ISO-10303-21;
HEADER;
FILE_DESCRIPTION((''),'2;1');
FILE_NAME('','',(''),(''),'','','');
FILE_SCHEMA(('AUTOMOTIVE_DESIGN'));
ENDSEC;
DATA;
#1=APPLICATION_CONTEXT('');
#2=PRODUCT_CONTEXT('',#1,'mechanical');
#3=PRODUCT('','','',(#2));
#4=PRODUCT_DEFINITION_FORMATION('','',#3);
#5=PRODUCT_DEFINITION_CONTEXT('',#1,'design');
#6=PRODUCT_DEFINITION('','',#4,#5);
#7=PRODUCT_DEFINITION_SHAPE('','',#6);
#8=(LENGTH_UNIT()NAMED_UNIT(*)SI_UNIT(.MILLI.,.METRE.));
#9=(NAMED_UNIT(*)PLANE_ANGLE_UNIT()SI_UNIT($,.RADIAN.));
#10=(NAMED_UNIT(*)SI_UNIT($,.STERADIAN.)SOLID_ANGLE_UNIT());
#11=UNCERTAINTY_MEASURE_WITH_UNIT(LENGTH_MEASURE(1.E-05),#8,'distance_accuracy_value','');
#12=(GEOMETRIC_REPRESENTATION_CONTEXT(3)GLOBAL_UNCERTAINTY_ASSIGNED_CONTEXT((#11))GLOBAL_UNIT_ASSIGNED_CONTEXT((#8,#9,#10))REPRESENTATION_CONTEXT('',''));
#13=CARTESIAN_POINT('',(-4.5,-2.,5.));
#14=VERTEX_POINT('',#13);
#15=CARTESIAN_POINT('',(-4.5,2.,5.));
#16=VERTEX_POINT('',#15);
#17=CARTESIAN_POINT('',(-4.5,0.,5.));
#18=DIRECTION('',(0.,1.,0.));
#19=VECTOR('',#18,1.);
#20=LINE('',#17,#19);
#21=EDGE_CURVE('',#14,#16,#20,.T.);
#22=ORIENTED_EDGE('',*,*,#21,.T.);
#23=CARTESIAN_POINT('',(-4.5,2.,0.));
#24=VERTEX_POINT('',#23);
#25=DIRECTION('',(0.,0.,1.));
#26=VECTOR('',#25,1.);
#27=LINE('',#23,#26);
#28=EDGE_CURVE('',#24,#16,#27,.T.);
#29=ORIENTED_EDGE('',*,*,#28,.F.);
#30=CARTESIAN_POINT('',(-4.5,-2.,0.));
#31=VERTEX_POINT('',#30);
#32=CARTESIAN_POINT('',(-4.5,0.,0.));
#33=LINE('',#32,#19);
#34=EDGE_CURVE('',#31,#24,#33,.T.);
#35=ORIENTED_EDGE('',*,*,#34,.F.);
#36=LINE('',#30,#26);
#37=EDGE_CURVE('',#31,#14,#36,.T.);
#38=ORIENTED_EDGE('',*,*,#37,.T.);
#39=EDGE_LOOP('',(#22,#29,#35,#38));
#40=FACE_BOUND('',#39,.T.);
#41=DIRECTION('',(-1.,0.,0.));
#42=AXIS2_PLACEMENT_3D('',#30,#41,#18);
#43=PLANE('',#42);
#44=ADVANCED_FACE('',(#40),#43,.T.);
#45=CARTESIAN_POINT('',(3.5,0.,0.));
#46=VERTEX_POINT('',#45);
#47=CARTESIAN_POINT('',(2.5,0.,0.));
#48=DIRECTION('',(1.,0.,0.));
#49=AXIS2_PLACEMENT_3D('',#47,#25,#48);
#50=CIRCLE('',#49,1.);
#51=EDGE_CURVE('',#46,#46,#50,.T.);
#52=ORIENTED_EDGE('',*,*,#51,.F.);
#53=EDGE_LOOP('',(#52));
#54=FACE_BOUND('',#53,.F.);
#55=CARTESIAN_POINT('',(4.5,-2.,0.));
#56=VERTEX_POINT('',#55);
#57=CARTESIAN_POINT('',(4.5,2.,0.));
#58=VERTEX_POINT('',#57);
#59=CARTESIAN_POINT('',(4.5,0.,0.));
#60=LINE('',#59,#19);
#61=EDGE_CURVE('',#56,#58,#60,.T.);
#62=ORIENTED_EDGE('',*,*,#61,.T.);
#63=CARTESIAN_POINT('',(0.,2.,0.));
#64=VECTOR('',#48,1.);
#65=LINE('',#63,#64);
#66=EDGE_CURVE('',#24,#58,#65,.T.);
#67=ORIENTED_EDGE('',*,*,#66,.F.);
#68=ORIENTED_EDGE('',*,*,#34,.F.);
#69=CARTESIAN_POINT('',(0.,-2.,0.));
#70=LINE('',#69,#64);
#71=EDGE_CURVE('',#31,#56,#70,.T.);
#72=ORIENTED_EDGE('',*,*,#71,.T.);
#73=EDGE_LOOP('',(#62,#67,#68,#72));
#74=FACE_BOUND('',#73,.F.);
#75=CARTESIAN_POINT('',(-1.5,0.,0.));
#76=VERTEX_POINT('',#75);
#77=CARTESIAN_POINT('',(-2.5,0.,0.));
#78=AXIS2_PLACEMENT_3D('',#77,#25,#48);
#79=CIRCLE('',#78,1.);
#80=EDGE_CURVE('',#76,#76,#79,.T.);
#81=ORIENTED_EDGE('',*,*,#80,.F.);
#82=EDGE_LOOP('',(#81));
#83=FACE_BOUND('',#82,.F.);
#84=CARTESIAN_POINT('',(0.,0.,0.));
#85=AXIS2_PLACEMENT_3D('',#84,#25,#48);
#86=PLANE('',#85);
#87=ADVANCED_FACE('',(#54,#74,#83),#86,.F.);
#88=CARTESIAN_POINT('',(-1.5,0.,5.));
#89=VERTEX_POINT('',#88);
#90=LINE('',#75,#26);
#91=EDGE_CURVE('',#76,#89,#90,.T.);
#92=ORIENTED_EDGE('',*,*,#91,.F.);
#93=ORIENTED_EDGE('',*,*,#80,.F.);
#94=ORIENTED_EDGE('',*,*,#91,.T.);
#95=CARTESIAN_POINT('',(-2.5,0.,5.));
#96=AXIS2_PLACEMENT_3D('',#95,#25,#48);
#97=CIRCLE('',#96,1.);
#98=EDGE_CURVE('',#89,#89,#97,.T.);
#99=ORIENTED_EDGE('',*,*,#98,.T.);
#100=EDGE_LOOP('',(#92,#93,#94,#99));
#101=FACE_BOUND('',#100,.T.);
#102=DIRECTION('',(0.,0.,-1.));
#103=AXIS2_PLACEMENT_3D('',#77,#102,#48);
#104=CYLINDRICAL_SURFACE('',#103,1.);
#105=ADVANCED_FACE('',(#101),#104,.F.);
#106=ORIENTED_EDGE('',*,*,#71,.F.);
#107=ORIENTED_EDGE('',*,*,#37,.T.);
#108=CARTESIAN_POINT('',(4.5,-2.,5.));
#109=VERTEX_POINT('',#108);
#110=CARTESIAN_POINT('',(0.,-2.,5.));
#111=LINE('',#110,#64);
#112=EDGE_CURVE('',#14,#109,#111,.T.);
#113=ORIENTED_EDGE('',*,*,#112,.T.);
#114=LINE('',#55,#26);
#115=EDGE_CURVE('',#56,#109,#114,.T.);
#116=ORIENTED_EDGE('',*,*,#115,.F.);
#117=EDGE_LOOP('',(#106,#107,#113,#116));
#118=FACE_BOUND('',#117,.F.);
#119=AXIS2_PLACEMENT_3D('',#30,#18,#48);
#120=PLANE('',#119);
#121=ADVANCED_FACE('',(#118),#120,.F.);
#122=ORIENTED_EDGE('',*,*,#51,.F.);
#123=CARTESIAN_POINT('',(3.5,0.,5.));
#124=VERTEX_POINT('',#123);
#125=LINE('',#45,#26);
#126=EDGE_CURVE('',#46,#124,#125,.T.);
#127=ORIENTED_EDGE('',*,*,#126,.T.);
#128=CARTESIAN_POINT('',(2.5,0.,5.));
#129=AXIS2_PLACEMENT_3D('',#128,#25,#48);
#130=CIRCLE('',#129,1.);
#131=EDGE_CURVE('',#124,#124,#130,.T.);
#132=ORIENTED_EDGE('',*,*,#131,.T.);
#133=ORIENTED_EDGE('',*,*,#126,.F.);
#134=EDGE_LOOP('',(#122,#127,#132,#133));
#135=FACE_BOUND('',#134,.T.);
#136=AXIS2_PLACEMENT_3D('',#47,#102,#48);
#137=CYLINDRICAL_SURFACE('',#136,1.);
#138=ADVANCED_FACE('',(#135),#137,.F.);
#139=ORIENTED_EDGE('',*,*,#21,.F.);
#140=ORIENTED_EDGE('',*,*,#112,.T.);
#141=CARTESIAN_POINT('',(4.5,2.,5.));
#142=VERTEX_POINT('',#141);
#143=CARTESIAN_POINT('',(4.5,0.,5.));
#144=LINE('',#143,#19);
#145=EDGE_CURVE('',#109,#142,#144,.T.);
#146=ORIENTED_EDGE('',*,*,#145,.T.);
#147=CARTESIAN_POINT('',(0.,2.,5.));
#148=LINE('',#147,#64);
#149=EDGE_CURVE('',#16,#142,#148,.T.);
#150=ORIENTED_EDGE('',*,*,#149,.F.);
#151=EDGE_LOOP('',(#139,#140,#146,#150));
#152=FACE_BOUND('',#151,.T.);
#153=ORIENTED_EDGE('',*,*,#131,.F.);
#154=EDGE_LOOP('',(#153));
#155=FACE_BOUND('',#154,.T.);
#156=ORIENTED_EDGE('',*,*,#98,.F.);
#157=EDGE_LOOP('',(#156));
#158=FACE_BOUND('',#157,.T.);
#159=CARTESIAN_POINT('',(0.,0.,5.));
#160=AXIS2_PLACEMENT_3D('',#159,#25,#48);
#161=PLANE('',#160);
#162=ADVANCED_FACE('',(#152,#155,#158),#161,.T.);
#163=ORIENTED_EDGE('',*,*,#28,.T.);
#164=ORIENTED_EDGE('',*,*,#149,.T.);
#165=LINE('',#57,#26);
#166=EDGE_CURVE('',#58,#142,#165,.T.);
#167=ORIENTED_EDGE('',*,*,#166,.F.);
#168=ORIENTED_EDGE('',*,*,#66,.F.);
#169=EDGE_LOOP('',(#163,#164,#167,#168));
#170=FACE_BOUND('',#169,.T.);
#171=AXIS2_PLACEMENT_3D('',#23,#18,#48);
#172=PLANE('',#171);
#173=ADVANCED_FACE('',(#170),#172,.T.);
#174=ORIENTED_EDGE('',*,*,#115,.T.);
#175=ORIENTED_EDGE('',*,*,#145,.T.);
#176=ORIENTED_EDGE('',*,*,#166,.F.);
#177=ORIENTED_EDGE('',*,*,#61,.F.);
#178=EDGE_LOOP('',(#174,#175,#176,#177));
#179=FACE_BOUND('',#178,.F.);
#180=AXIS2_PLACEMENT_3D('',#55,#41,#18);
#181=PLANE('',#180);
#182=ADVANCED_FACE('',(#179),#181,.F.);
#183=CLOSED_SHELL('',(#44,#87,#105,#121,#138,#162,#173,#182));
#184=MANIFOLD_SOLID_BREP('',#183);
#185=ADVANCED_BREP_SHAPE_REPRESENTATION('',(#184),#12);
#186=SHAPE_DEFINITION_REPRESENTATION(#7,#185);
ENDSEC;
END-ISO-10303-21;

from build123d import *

# Parameters (mm, degrees)
F0_W     = 9
F0_H     = 4
F0_R     = 1
F1_DEPTH = 5


# Not quite as in the source:
# - the program builds the solid bodies; features that only make, move or delete a surface that nothing else refers to are left out


with BuildPart() as f1:
    # F0 (on Top) → F1 (new body)
    with BuildSketch(Plane.XY):
        Rectangle(F0_W, F0_H)
        with Locations((-2.5, 0)):
            Circle(F0_R, mode=Mode.SUBTRACT)
        with Locations((2.5, 0)):
            Circle(F0_R, mode=Mode.SUBTRACT)
    extrude(amount=F1_DEPTH)


solid = f1.part
